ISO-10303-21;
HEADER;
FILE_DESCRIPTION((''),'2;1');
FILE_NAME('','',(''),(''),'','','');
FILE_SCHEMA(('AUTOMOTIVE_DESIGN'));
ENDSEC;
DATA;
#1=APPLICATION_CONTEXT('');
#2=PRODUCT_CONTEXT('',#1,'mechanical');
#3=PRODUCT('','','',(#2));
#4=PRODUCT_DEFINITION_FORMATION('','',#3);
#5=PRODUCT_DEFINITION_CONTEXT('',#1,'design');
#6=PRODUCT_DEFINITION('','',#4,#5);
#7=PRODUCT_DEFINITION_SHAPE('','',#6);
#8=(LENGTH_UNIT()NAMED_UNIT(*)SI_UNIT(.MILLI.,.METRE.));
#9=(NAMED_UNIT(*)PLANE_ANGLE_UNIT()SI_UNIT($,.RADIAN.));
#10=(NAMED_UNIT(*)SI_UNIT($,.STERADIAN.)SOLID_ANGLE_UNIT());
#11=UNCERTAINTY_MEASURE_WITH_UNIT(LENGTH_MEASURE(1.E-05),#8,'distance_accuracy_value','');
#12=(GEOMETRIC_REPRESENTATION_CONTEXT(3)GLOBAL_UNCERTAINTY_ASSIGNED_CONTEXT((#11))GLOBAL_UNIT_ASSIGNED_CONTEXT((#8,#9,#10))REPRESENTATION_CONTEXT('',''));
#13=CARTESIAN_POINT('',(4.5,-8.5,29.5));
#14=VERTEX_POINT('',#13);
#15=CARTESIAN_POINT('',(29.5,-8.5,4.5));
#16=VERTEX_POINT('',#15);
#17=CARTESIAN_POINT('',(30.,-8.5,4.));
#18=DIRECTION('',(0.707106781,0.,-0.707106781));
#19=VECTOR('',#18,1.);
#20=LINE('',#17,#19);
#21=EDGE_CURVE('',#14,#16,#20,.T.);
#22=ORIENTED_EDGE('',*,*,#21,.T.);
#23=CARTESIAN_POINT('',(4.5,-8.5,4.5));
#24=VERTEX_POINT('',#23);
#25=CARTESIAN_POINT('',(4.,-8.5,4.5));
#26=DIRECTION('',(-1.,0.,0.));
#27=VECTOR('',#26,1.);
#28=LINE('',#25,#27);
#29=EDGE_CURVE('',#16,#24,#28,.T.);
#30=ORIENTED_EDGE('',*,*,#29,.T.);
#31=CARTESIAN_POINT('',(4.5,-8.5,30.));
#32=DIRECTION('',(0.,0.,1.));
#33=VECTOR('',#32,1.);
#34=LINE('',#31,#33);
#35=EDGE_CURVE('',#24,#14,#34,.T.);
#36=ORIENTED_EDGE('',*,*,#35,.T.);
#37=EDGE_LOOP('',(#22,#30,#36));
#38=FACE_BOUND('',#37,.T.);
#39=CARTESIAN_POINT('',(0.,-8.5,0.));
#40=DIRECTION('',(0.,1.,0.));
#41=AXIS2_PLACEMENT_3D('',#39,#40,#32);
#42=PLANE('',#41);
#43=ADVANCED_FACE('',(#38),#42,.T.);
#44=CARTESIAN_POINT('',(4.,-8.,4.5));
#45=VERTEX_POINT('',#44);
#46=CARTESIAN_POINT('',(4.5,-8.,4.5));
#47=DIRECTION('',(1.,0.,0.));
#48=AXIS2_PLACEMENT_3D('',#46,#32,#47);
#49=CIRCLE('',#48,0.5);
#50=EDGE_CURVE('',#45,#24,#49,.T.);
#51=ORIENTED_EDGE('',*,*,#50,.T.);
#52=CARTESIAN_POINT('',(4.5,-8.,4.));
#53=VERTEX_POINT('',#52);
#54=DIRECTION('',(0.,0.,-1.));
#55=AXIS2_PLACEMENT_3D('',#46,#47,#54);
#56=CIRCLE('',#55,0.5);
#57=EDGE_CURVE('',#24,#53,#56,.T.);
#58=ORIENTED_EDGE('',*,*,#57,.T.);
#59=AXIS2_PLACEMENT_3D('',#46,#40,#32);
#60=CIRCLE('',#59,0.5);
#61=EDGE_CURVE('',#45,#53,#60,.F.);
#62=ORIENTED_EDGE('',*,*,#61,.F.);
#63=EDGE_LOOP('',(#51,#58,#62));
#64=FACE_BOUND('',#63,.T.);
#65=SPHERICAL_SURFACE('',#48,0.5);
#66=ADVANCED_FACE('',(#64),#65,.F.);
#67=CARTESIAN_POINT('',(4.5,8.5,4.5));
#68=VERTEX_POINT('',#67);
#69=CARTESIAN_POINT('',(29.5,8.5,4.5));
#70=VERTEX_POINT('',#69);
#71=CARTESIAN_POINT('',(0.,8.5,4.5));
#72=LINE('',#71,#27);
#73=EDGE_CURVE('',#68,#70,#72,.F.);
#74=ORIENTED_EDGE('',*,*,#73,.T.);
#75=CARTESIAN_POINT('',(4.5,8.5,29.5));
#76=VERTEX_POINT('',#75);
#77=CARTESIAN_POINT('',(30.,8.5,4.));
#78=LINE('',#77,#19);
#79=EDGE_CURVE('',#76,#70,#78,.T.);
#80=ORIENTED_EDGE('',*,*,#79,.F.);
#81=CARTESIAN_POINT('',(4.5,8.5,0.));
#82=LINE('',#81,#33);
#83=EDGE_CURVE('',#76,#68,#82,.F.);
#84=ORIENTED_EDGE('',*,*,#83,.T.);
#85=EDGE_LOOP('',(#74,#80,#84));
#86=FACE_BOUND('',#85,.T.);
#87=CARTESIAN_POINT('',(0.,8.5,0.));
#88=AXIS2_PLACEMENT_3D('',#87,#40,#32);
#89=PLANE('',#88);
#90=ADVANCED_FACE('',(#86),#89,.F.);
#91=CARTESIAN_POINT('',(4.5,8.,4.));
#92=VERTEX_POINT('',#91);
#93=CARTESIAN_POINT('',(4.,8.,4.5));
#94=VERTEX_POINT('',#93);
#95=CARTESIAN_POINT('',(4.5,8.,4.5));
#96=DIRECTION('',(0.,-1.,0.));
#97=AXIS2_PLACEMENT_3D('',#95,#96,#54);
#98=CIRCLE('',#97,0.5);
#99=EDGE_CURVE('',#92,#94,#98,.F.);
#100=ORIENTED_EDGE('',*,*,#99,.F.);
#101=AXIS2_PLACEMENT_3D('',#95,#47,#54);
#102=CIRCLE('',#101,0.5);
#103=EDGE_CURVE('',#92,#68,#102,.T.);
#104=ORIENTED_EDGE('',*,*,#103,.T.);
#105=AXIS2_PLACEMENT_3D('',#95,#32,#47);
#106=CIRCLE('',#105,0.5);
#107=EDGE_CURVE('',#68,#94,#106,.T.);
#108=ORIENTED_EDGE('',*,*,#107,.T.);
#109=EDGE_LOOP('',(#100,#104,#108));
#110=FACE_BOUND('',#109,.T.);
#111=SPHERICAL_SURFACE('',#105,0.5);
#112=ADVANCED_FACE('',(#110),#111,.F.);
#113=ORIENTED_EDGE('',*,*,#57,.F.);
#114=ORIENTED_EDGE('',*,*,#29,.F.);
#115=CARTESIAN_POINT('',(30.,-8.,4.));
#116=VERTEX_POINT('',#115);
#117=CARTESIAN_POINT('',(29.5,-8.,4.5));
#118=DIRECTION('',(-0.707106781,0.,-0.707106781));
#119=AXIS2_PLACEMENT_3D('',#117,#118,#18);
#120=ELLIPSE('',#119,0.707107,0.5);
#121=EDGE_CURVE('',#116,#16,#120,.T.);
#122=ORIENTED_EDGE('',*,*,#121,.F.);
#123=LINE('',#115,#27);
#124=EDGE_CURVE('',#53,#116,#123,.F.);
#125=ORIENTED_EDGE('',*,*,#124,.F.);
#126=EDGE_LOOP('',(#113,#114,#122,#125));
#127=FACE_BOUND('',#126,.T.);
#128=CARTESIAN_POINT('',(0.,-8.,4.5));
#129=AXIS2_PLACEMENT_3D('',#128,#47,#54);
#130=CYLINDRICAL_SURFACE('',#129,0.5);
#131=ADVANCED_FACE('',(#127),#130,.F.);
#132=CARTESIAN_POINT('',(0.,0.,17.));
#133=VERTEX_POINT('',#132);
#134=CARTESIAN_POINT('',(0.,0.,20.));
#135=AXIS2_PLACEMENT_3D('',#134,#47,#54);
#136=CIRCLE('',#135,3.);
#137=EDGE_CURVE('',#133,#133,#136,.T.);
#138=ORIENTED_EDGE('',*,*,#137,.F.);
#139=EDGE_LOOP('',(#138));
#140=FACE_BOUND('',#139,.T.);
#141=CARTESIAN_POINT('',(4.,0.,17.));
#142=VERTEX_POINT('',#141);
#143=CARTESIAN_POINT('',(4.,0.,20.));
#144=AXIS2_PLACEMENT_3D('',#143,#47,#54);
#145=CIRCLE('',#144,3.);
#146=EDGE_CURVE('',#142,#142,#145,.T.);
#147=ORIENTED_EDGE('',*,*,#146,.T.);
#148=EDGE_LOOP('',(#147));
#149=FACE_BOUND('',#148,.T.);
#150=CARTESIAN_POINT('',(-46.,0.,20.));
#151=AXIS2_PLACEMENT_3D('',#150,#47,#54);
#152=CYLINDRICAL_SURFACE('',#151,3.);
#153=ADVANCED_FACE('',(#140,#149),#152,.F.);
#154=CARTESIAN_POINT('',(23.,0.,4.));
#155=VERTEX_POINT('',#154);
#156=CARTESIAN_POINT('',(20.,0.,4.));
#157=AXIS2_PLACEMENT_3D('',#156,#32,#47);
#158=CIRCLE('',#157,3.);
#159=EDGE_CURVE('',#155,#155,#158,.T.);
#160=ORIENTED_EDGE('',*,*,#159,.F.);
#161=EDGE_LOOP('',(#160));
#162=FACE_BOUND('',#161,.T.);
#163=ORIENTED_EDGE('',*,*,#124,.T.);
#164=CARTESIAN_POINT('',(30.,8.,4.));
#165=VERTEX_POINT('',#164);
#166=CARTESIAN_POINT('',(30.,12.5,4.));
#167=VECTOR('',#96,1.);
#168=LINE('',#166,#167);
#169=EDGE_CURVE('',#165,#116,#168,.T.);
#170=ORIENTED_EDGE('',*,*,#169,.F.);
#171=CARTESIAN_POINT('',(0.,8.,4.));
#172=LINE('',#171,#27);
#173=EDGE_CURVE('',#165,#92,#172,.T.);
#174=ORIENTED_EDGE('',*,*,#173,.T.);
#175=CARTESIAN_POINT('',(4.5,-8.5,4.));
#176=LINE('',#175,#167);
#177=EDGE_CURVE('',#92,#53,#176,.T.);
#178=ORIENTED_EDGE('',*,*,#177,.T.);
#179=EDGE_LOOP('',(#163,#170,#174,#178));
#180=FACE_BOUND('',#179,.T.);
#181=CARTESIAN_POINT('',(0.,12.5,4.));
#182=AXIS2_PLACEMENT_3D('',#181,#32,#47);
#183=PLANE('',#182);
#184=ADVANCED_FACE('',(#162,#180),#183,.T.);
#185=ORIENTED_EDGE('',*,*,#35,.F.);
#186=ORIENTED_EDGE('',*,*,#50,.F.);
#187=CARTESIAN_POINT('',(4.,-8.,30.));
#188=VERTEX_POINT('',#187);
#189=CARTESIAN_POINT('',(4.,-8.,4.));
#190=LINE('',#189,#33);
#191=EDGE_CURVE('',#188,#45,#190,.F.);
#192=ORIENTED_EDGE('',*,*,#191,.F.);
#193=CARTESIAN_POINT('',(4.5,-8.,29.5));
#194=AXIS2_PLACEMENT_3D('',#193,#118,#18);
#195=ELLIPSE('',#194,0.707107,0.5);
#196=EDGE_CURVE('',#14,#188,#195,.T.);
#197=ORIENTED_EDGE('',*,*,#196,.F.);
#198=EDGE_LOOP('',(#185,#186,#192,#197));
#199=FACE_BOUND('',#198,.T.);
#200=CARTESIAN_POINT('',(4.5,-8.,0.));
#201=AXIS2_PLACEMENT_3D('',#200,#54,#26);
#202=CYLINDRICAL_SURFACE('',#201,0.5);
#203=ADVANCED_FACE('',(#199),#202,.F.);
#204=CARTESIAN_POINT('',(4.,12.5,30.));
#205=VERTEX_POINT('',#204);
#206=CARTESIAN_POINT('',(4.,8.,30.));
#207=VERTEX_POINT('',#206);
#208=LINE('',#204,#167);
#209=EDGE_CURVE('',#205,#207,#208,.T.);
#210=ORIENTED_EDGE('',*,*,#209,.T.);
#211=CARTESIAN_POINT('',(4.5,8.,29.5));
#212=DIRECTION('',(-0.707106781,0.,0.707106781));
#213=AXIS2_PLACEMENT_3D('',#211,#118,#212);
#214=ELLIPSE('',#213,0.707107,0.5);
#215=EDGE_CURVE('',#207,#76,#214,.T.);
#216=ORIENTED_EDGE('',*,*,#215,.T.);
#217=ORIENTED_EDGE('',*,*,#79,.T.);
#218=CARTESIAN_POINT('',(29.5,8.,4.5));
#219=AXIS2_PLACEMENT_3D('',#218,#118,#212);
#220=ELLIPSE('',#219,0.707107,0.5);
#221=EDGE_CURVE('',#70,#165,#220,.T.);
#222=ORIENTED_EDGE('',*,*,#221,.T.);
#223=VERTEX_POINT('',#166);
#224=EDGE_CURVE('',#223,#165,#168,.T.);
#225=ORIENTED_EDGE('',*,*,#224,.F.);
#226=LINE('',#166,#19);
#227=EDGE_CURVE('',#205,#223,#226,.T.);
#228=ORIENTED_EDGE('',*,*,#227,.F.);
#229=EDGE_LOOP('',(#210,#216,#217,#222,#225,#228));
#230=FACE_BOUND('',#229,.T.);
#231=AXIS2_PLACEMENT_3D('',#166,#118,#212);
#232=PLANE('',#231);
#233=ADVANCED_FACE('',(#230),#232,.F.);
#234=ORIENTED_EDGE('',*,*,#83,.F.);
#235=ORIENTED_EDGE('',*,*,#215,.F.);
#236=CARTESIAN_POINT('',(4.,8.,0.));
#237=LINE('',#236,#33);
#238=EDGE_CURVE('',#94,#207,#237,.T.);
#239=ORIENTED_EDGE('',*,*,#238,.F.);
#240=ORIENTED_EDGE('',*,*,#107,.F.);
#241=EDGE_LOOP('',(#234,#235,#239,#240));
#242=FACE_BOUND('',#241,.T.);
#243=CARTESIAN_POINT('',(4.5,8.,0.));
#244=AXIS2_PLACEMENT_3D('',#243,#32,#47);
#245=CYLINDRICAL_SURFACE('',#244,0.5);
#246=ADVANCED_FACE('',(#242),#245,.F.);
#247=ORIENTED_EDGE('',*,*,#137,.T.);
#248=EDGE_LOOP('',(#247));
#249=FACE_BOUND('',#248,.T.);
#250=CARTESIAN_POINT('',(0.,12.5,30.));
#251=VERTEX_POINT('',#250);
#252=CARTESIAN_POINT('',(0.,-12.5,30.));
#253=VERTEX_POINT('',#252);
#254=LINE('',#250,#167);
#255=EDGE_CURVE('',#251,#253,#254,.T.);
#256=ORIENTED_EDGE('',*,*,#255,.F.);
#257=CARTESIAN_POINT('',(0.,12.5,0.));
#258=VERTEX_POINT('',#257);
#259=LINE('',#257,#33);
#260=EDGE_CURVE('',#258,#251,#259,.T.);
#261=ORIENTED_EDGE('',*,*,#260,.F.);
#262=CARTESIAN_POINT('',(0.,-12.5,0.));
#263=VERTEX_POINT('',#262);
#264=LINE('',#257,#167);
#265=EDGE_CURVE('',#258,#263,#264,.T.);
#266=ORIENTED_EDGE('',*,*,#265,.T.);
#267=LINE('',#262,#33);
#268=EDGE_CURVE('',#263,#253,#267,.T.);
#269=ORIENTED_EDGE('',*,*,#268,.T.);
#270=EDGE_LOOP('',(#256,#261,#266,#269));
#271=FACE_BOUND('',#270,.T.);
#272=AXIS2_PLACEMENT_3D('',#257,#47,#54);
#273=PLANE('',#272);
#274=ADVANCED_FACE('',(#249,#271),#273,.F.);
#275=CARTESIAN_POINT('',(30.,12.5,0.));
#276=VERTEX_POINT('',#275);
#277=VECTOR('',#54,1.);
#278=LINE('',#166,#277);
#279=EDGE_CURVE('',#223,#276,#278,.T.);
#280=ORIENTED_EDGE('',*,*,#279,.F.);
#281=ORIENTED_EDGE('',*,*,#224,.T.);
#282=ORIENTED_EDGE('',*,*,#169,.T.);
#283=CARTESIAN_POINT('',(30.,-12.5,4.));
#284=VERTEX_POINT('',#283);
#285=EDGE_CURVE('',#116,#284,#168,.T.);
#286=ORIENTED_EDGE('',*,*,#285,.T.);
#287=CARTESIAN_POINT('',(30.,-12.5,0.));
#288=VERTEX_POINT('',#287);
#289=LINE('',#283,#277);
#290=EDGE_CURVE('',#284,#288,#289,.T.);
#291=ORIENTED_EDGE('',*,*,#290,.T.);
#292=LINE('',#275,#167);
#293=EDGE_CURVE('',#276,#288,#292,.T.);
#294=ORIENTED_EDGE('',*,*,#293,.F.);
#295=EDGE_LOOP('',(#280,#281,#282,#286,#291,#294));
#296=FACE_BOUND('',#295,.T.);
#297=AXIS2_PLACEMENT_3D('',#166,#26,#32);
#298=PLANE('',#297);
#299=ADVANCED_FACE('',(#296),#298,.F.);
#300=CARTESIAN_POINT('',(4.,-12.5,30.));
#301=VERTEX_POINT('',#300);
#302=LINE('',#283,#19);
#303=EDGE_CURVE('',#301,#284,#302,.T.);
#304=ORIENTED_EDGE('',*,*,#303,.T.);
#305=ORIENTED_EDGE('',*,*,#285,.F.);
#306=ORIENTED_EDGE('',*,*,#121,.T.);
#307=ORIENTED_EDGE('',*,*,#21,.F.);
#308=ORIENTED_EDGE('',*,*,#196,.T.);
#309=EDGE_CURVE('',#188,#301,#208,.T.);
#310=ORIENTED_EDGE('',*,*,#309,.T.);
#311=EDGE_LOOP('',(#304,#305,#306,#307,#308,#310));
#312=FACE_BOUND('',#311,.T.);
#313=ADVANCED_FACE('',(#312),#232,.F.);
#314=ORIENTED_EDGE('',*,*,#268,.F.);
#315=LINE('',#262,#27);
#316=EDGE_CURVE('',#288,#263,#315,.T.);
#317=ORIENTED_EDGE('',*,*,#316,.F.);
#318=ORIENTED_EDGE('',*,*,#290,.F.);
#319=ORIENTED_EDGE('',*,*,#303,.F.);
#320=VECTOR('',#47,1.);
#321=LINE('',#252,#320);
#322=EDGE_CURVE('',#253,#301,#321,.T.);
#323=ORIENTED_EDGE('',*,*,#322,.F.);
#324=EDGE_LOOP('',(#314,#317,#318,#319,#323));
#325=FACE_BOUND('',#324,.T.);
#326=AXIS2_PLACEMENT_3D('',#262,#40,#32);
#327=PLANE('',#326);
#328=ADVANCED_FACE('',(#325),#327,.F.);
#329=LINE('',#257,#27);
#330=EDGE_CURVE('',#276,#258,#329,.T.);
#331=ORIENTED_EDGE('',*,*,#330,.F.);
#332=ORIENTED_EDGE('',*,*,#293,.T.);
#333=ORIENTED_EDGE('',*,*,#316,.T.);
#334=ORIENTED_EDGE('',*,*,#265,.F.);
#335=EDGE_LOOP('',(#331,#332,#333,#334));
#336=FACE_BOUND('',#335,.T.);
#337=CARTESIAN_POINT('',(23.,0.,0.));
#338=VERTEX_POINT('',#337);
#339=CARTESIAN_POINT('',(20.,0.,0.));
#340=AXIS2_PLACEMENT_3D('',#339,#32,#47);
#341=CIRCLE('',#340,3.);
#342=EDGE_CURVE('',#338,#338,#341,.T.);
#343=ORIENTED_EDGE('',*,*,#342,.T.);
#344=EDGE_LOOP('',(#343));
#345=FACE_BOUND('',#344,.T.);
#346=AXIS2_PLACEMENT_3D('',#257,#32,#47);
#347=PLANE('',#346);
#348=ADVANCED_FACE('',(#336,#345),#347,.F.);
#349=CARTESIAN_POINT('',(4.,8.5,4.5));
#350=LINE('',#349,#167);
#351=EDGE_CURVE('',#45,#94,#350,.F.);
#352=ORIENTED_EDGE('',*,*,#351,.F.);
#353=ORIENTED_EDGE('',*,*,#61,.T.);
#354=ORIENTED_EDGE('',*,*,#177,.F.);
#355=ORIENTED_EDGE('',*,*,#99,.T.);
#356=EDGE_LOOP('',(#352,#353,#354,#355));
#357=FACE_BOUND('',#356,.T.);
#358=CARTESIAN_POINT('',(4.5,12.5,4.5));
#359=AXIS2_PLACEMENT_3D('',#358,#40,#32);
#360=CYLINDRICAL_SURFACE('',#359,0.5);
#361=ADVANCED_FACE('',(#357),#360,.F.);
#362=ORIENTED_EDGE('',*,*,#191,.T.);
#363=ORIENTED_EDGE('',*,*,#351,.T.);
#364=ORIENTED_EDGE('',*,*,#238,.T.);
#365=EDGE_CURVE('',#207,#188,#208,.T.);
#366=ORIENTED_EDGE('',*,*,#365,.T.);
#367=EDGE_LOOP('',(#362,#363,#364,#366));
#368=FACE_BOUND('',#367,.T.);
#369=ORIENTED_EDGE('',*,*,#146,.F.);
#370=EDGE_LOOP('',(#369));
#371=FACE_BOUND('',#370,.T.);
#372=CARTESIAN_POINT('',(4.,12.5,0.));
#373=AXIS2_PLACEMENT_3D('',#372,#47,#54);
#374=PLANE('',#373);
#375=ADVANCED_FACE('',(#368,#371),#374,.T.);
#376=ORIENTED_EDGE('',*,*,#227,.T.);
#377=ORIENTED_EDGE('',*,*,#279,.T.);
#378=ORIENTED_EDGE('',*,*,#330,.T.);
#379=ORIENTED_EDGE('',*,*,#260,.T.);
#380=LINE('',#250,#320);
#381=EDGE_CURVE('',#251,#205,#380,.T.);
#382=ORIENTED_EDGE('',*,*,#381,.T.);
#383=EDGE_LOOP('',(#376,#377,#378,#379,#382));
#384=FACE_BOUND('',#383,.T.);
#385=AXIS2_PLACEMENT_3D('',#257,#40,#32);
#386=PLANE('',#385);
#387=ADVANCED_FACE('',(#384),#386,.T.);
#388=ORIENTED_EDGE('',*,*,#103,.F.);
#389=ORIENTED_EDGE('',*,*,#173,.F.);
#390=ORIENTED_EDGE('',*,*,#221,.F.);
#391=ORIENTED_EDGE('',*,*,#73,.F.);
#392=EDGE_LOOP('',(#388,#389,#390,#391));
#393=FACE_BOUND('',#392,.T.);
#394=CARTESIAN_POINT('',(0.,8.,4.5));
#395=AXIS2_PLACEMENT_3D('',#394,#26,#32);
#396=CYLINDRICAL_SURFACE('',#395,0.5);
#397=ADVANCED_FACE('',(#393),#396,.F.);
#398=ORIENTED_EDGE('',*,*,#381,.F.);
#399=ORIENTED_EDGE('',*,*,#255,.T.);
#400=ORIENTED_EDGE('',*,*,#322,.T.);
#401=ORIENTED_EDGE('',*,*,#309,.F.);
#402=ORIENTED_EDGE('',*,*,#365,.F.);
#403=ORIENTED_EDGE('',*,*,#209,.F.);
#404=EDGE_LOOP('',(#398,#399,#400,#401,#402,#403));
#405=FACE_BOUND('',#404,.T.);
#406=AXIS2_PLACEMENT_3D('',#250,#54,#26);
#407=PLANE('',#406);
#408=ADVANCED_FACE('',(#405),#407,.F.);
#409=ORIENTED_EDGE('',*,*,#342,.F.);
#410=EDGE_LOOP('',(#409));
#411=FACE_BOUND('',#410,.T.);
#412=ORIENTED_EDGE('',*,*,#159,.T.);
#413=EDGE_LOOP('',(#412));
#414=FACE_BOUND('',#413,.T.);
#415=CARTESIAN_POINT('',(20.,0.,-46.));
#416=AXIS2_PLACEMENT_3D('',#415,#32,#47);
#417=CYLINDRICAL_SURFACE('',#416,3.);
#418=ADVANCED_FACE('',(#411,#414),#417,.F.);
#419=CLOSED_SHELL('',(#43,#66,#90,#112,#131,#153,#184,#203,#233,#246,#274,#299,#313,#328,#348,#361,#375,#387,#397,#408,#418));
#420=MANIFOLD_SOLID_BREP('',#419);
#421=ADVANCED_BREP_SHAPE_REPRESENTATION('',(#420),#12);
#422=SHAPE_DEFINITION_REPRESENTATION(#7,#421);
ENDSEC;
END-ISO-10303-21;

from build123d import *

# Parameters (mm, degrees)
DODANIE_WYCI_GNI_CIE1_DEPTH = 12.5
SKORUPA1_START              = 4
SKORUPA1_OUTLINE_W          = 27
SKORUPA1_OUTLINE_H          = 17
SKORUPA1_DEPTH              = 26
SZKIC2_R                    = 3
WYTNIJ_WYCI_GNI_CIE1_DEPTH  = 50
SZKIC3_R                    = 3
SZKIC3_R_2                  = 4
WYTNIJ_WYCI_GNI_CIE2_DEPTH  = 50
ZAOKR_GLENIE1_R             = 0.5


# Read off the part's stored shape, not the designer's step: Skorupa1
with BuildPart() as part:
    # Szkic1 → Dodanie-wyciągnięcie1 (new, symmetric)
    with BuildSketch(Plane(origin=(0, 0, 0), x_dir=(1, 0, 0), z_dir=(0, 1, 0))):
        Polygon((0, 0), (0, -30), (4, -30), (30, -4), (30, 0), align=None)
    extrude(amount=DODANIE_WYCI_GNI_CIE1_DEPTH, both=True)

    # Skorupa1 outline → Skorupa1 (cut)
    with BuildSketch(Plane.XY.offset(SKORUPA1_START)):
        with Locations((17.5, 0)):
            Rectangle(SKORUPA1_OUTLINE_W, SKORUPA1_OUTLINE_H)
    extrude(amount=SKORUPA1_DEPTH, mode=Mode.SUBTRACT)

    # Szkic2 → Wytnij-wyciągnięcie1 (cut)
    with BuildSketch(Plane(origin=(4, 0, 0), x_dir=(0, 0, -1), z_dir=(1, 0, 0))):
        with Locations((-20, 0)):
            Circle(SZKIC2_R)
    extrude(amount=-WYTNIJ_WYCI_GNI_CIE1_DEPTH, mode=Mode.SUBTRACT)

    # Szkic3 → Wytnij-wyciągnięcie2 (cut)
    with BuildSketch(Plane.XY.offset(4)):
        with Locations((20, 0)):
            Circle(SZKIC3_R)
        with Locations((18, 24.919871589)):
            Circle(SZKIC3_R_2)
    extrude(amount=-WYTNIJ_WYCI_GNI_CIE2_DEPTH, mode=Mode.SUBTRACT)

    # Zaokrąglenie1
    zaokr_glenie1_edges = [part.edges().sort_by_distance(p)[0] for p in [
        (17, -8.5, 4),
        (4, -8.5, 17),
        (4, 0, 4),
        (17, 8.5, 4),
        (4, 8.5, 17),
    ]]
    fillet(zaokr_glenie1_edges, radius=ZAOKR_GLENIE1_R)


solid = part.part
